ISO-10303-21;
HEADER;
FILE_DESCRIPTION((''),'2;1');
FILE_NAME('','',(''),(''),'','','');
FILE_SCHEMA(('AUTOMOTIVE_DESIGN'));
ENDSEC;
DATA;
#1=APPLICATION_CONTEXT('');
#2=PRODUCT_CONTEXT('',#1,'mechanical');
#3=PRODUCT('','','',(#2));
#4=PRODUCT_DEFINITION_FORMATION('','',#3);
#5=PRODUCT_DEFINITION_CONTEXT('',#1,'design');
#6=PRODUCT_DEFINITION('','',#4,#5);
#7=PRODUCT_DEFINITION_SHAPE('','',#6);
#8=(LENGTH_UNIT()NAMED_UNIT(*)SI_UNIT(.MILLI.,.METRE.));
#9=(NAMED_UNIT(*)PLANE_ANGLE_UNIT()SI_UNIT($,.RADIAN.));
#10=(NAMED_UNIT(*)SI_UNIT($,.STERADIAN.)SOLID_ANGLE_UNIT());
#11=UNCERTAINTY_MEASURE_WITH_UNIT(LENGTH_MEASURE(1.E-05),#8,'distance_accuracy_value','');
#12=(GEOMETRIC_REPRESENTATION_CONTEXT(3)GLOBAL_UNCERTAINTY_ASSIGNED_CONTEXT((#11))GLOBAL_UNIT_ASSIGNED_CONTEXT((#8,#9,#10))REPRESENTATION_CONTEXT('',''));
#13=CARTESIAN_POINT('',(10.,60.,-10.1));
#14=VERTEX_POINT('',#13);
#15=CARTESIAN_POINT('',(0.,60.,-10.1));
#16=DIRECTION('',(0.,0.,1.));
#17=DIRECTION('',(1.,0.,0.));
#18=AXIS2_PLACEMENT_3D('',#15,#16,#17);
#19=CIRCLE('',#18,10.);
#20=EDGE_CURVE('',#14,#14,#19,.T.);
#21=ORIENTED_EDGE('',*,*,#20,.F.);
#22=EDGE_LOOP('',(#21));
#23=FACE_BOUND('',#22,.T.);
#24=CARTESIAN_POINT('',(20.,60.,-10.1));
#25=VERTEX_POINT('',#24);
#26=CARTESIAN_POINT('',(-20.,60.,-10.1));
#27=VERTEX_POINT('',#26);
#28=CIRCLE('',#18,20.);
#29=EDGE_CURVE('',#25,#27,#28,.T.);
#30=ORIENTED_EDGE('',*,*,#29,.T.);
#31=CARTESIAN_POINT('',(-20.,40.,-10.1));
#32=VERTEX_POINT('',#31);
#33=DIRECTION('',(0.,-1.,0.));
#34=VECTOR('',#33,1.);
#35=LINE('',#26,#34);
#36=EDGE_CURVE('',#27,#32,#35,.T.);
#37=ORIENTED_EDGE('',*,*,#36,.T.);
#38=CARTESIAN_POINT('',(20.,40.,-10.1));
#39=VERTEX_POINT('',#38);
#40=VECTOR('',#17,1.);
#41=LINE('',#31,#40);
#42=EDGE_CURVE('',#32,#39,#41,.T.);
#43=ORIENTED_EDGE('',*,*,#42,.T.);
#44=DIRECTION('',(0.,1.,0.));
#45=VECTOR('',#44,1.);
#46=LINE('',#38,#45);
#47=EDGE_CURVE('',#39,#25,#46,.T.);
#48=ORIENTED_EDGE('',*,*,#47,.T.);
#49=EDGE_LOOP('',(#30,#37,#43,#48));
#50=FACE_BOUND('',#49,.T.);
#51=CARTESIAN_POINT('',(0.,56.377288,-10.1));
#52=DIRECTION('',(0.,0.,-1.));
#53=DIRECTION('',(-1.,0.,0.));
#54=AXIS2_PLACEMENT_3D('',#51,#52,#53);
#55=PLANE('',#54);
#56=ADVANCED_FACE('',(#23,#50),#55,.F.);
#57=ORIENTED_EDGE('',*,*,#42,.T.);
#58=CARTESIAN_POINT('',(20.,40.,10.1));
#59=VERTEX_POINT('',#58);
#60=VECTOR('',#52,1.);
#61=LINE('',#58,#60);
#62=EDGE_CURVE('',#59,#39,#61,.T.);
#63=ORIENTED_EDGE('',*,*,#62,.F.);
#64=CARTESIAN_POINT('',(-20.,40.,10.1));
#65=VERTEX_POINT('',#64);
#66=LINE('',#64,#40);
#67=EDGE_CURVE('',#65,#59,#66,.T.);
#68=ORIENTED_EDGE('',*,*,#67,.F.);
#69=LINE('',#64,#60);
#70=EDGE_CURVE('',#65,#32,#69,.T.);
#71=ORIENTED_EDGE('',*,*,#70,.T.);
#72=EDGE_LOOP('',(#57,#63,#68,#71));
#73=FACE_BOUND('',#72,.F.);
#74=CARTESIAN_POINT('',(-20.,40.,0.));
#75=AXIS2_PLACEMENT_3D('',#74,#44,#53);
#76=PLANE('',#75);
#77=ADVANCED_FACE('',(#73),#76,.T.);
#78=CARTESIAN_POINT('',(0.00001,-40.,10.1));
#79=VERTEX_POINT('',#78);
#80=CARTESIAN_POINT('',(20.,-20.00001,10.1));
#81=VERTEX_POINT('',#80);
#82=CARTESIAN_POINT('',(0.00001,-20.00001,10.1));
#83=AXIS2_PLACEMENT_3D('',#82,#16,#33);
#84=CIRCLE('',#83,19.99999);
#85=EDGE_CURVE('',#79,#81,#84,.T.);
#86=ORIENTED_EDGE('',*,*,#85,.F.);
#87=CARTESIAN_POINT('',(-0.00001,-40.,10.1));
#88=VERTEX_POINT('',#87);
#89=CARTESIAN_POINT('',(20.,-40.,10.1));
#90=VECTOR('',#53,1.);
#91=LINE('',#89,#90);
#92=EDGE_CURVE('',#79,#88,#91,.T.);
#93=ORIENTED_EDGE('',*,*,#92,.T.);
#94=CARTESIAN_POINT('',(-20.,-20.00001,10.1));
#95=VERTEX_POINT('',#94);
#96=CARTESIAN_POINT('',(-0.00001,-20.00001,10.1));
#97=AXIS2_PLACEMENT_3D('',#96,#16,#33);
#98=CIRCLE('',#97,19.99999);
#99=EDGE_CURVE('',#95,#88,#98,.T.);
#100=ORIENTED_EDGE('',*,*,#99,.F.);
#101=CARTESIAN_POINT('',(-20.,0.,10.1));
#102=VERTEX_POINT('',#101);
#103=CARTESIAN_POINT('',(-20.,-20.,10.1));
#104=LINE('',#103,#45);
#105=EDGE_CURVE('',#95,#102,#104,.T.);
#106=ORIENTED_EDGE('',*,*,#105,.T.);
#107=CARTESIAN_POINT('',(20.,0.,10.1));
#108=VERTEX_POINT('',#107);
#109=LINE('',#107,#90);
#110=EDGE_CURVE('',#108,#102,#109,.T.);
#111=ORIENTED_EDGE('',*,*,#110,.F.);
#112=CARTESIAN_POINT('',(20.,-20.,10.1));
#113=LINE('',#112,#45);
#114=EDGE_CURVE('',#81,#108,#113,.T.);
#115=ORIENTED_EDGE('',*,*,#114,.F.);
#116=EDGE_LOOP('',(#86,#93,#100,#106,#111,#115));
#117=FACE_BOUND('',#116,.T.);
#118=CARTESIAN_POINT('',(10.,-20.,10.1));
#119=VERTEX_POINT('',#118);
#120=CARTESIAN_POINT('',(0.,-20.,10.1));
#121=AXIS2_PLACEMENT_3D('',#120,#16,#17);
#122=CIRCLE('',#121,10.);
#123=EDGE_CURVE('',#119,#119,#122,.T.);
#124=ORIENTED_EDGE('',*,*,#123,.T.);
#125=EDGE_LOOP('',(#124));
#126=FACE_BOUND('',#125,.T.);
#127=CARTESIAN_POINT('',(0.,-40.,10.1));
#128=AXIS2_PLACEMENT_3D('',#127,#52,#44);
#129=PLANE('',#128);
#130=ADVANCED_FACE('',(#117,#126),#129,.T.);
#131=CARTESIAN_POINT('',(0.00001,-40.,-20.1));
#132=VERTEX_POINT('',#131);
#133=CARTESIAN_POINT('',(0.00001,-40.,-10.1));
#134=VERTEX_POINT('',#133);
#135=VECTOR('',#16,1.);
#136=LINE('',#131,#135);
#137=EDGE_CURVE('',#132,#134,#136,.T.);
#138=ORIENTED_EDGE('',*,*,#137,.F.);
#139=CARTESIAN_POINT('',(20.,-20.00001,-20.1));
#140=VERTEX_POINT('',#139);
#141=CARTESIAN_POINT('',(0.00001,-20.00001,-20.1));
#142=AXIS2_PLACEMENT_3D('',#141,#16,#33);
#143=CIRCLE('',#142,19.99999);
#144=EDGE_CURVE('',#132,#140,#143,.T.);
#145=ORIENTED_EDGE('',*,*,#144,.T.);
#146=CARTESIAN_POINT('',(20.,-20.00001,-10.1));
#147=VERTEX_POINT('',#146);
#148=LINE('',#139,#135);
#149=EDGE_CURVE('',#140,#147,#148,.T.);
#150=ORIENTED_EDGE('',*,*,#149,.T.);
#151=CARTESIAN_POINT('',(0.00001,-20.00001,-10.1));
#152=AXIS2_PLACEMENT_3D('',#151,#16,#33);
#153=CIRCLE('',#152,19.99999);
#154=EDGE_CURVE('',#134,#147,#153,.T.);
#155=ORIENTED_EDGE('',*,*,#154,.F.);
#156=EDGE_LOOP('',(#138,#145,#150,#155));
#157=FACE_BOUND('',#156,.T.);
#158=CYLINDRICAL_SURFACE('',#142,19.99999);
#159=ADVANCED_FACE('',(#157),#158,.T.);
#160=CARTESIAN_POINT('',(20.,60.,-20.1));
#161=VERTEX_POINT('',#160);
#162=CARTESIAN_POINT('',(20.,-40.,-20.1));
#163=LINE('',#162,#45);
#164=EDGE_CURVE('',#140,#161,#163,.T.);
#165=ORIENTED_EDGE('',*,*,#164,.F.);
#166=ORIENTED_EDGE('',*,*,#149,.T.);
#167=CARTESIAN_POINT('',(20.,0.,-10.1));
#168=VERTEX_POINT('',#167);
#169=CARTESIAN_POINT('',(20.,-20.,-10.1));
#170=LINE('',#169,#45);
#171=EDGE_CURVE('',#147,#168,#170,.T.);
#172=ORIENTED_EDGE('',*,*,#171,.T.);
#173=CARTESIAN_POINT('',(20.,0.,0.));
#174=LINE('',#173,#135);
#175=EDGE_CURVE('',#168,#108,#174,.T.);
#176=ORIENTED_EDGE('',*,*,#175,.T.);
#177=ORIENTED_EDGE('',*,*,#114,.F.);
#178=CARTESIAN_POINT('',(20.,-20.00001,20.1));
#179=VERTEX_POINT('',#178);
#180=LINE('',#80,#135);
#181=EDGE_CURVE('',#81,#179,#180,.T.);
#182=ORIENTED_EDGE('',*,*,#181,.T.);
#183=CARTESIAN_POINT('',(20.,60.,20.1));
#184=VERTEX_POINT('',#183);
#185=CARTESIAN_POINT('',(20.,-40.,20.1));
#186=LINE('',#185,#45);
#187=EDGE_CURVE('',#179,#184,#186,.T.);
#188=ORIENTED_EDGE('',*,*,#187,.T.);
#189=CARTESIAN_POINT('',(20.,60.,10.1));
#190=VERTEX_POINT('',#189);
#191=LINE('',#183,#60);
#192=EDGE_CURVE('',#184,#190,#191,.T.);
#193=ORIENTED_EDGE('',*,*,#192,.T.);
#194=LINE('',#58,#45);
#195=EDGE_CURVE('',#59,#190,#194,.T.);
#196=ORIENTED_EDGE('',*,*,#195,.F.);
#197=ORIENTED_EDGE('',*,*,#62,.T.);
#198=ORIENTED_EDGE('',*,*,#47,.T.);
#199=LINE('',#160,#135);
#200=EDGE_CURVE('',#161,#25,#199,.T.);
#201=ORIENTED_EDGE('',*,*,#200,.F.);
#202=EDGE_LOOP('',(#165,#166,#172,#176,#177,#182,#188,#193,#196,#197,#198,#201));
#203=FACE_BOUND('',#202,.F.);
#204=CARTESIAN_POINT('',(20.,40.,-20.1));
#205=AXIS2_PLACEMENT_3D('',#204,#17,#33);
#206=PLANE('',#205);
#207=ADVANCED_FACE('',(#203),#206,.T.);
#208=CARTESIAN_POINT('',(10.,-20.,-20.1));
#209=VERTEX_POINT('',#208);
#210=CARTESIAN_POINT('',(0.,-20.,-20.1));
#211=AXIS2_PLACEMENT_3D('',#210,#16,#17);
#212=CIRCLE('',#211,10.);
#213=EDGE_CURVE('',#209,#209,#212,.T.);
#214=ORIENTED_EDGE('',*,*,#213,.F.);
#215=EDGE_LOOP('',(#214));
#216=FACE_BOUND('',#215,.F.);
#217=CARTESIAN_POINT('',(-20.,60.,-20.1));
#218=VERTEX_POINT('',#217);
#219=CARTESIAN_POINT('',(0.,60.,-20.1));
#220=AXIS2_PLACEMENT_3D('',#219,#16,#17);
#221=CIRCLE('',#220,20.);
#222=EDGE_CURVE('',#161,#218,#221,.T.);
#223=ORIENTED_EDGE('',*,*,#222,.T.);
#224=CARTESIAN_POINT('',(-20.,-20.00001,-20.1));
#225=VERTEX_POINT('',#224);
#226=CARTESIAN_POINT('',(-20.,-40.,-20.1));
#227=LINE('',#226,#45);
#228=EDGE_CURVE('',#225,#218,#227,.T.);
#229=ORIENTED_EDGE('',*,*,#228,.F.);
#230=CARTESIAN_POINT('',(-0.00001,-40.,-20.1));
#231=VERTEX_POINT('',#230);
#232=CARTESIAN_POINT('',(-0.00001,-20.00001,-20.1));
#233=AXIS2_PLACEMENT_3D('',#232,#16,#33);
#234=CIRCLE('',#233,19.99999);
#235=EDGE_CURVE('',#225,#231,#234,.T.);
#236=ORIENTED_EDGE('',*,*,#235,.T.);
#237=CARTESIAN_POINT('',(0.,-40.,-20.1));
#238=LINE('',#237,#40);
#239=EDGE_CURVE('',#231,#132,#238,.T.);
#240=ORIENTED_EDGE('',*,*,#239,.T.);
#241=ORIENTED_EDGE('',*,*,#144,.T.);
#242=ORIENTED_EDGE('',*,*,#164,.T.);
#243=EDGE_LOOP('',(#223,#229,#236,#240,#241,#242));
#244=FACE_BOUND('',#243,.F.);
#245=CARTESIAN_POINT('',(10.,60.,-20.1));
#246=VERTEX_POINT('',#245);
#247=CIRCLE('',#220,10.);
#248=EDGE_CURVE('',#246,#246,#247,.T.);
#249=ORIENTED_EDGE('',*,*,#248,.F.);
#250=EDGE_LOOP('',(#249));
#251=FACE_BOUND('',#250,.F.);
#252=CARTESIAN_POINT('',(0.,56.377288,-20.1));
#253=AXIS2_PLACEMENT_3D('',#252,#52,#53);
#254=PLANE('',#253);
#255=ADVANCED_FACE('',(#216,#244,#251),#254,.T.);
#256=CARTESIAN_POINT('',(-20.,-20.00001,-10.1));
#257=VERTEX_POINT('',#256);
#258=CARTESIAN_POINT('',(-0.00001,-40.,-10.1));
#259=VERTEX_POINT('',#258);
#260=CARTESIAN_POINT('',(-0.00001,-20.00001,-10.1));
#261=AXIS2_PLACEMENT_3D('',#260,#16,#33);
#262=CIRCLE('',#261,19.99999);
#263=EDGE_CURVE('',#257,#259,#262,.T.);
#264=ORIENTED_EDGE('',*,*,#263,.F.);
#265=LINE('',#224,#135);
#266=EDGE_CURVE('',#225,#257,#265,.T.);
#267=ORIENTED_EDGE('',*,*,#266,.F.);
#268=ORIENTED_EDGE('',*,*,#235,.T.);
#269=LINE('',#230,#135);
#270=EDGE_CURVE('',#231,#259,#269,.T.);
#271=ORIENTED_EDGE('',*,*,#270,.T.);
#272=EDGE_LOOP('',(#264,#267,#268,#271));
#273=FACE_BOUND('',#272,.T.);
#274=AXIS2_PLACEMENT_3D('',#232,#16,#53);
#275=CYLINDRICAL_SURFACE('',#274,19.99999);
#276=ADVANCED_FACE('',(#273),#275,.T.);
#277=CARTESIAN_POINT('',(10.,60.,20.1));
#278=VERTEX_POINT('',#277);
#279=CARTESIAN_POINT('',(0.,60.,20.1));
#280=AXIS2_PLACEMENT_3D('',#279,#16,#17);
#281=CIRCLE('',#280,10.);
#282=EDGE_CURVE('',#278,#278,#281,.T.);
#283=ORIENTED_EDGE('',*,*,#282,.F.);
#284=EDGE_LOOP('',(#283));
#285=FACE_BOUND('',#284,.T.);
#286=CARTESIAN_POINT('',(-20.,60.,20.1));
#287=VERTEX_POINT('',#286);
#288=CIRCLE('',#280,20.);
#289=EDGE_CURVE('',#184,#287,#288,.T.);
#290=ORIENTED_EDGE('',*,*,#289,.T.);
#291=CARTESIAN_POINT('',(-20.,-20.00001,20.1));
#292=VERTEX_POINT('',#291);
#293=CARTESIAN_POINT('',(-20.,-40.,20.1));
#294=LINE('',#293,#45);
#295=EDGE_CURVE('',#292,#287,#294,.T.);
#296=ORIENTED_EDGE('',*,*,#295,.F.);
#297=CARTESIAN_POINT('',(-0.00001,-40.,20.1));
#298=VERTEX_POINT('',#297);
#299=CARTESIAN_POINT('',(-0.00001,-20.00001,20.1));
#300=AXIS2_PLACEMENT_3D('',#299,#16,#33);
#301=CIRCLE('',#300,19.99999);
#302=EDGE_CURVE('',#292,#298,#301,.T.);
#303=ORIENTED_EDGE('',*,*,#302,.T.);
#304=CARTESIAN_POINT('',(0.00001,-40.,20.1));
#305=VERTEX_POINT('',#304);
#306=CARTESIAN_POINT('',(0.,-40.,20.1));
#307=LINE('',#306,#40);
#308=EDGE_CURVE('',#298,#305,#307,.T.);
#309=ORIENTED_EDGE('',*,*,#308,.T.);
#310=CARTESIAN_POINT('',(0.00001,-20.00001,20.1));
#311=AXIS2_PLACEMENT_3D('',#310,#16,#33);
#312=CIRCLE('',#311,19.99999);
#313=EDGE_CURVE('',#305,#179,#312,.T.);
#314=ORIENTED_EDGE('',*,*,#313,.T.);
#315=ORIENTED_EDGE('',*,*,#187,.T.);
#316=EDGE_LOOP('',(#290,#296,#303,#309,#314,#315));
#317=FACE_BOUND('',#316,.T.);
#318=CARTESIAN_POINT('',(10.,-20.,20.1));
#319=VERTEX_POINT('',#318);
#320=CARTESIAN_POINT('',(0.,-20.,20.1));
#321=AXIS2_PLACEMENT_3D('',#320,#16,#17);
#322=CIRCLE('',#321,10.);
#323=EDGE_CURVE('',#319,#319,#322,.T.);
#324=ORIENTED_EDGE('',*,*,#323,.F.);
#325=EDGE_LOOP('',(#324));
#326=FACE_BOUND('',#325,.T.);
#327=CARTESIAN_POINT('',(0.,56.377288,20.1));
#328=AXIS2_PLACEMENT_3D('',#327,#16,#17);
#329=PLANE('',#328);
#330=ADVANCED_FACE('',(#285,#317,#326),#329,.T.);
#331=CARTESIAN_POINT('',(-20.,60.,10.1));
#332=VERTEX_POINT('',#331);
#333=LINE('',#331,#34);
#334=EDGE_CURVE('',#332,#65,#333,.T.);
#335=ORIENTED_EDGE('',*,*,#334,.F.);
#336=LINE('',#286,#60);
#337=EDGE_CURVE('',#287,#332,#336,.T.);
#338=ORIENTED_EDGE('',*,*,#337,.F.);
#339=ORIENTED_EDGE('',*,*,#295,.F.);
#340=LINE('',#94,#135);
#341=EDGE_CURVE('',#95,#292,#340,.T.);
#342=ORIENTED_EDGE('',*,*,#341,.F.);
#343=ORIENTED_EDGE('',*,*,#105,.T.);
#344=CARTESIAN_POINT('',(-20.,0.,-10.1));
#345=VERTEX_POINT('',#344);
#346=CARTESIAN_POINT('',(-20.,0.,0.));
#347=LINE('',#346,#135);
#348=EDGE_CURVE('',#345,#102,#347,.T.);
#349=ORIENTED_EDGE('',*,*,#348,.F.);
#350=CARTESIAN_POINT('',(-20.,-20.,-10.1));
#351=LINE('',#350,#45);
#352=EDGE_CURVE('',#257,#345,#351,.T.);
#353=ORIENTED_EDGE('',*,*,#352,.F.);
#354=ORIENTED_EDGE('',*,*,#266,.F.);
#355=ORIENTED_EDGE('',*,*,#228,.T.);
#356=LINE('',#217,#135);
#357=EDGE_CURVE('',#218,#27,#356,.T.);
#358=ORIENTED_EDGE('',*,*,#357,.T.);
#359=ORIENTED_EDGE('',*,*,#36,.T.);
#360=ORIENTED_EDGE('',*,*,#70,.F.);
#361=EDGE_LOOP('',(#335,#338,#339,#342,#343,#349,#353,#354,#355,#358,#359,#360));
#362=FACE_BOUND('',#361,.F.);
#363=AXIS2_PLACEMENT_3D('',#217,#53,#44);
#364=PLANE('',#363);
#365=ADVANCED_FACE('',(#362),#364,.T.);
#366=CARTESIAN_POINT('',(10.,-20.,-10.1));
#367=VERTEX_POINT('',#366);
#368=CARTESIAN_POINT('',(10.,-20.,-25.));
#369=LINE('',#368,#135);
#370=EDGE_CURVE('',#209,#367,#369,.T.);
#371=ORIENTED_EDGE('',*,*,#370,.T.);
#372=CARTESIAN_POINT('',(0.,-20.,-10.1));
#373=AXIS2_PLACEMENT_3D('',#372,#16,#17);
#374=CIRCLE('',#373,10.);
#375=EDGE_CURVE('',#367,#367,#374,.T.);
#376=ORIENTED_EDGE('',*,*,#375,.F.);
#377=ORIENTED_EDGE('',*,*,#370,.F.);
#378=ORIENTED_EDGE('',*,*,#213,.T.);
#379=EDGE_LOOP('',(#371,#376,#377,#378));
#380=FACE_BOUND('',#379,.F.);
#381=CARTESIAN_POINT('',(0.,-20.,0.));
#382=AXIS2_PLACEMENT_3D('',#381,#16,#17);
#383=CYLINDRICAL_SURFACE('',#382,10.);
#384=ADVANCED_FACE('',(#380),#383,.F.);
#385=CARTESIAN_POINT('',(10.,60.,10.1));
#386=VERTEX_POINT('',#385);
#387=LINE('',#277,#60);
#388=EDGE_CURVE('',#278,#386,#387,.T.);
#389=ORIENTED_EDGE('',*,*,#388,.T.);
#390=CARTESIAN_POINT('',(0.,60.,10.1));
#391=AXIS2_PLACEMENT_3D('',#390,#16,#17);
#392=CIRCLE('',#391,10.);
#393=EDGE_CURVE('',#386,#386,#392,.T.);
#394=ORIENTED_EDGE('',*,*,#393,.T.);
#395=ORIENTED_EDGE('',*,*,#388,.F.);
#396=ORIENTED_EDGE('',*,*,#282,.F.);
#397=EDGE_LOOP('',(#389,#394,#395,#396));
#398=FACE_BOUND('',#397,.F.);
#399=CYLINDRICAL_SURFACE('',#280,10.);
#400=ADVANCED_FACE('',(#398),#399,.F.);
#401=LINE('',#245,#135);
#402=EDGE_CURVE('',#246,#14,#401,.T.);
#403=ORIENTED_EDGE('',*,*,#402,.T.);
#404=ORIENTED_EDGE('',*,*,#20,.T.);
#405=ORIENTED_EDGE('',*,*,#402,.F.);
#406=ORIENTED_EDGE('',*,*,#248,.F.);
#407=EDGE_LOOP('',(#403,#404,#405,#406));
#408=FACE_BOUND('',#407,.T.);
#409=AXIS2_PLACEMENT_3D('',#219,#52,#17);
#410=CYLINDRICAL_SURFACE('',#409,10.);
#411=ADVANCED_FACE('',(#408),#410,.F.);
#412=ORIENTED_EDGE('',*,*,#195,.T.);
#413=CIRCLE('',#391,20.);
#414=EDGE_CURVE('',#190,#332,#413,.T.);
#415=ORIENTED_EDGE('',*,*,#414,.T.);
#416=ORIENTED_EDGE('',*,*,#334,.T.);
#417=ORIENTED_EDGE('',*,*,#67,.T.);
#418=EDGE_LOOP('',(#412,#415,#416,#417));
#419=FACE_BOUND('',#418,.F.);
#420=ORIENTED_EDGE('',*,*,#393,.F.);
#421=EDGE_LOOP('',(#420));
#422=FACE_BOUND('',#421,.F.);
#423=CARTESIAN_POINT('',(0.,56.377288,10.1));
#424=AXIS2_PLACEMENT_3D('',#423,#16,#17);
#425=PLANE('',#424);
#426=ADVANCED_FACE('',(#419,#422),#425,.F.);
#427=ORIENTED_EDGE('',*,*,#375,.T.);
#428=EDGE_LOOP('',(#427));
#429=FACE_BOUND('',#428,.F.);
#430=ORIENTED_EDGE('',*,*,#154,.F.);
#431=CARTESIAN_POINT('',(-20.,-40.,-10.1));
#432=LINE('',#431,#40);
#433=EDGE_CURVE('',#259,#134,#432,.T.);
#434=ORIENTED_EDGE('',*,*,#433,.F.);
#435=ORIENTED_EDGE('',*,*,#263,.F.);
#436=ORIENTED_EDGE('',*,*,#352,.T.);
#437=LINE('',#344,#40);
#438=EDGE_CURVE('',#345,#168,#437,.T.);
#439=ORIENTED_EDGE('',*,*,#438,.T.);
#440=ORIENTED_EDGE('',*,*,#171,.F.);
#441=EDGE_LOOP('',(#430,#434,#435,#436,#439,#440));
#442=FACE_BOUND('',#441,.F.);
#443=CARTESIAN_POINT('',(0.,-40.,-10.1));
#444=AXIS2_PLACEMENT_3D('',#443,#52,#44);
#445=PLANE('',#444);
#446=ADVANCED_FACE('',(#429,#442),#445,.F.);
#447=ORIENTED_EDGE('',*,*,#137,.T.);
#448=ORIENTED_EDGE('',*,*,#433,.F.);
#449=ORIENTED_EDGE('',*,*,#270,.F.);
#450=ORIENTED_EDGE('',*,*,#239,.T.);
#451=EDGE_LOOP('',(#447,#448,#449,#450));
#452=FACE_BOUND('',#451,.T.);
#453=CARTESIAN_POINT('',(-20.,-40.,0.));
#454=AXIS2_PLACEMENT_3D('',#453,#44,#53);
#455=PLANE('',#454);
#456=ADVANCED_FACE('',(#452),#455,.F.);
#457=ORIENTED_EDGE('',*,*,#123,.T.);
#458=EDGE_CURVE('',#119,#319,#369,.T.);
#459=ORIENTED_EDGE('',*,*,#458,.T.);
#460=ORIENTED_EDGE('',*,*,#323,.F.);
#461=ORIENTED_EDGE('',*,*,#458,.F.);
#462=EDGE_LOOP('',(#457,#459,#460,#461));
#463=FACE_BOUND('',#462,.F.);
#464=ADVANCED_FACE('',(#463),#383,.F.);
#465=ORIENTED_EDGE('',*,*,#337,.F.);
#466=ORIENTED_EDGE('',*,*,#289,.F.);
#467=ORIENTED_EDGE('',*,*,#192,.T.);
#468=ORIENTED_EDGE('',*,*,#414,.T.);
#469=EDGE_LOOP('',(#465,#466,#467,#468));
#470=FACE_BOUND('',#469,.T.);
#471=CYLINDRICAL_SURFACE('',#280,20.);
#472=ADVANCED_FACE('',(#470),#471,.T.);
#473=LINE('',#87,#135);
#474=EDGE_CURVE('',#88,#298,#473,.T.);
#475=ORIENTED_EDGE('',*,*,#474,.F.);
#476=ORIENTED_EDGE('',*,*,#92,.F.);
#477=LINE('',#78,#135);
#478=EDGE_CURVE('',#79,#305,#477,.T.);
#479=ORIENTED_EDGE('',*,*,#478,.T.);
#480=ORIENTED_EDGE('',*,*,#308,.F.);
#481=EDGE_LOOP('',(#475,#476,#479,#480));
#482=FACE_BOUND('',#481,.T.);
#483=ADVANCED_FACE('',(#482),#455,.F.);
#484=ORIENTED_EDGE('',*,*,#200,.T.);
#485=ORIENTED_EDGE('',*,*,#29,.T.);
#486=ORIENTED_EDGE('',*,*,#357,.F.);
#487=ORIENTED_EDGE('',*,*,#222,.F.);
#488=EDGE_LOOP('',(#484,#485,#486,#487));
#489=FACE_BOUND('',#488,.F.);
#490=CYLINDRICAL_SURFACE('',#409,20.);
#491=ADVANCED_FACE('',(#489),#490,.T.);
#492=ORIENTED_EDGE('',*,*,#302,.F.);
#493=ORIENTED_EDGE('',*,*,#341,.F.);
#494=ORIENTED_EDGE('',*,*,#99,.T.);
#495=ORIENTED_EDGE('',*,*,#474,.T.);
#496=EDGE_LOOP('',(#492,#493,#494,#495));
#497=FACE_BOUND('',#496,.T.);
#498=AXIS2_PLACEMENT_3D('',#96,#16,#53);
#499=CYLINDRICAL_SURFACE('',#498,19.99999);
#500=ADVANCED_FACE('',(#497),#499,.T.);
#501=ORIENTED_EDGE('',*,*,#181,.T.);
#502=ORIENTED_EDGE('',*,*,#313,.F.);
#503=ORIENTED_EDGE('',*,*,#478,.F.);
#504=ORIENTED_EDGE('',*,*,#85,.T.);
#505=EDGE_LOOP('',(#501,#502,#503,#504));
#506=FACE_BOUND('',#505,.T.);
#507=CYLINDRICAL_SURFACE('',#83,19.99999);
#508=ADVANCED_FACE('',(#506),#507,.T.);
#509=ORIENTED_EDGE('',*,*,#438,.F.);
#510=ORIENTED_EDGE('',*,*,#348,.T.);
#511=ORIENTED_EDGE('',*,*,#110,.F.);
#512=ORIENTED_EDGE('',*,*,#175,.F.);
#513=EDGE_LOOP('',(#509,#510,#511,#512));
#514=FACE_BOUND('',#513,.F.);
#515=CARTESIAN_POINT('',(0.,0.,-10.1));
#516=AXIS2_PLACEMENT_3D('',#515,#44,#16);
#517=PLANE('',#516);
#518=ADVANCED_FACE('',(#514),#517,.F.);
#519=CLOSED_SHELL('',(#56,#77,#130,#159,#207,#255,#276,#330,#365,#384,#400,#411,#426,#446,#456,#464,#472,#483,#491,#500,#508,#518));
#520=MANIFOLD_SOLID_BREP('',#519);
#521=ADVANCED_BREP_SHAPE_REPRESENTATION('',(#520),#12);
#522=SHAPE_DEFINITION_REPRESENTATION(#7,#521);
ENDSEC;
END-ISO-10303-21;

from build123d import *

# Parameters (mm, degrees)
F0_W     = 40
F0_H     = 80
F1_DEPTH = 20.1
F2_R     = 10
F3_DEPTH = 10
F5_W     = 40
F5_H     = 20.2
F6_DEPTH = 20
F7_R     = 10
F8_DEPTH = 25
F9_R     = 19.99999


# Not quite as in the source:
# - a fillet or chamfer is up to 0.001 mm smaller than in the source, because OpenCascade refuses the exact size


with BuildPart() as f1:
    # F0 (on Top) → F1 (new body)
    with BuildSketch(Plane.XY):
        Rectangle(F0_W, F0_H)
    extrude(amount=F1_DEPTH)

    # F2 (on face) → F3 (join)
    with BuildSketch(Plane.XY.offset(20.1)):
        with BuildLine():
            Line((-20, 60), (-20, 40))
            Line((-20, 40), (20, 40))
            Line((20, 40), (20, 60))
            ThreePointArc((20, 60), (0, 80), (-20, 60))
        make_face()
        with Locations((0, 60)):
            Circle(F2_R, mode=Mode.SUBTRACT)
    extrude(amount=-F3_DEPTH)

    # F4: F1 across plane


with BuildPart() as f1_1:
    add(f1.part)
    add(f1.part.mirror(Plane.XY))

    # F5 (on Right) → F6 (cut, symmetric)
    with BuildSketch(Plane.YZ):
        with Locations((-20, 0)):
            Rectangle(F5_W, F5_H)
    extrude(amount=F6_DEPTH, both=True, mode=Mode.SUBTRACT)

    # F7 (on Top) → F8 (cut, symmetric)
    with BuildSketch(Plane.XY):
        with Locations((0, -20)):
            Circle(F7_R)
    extrude(amount=F8_DEPTH, both=True, mode=Mode.SUBTRACT)

    # F9 (radius 20 in the source; OpenCascade refuses exactly that, so slightly less here)
    f9_edges = [f1_1.edges().sort_by_distance(p)[0] for p in [
        (20, -40, -15.1),
        (-20, -40, -15.1),
        (-20, -40, 15.1),
        (20, -40, 15.1),
    ]]
    fillet(f9_edges, radius=F9_R)


solid = f1_1.part
